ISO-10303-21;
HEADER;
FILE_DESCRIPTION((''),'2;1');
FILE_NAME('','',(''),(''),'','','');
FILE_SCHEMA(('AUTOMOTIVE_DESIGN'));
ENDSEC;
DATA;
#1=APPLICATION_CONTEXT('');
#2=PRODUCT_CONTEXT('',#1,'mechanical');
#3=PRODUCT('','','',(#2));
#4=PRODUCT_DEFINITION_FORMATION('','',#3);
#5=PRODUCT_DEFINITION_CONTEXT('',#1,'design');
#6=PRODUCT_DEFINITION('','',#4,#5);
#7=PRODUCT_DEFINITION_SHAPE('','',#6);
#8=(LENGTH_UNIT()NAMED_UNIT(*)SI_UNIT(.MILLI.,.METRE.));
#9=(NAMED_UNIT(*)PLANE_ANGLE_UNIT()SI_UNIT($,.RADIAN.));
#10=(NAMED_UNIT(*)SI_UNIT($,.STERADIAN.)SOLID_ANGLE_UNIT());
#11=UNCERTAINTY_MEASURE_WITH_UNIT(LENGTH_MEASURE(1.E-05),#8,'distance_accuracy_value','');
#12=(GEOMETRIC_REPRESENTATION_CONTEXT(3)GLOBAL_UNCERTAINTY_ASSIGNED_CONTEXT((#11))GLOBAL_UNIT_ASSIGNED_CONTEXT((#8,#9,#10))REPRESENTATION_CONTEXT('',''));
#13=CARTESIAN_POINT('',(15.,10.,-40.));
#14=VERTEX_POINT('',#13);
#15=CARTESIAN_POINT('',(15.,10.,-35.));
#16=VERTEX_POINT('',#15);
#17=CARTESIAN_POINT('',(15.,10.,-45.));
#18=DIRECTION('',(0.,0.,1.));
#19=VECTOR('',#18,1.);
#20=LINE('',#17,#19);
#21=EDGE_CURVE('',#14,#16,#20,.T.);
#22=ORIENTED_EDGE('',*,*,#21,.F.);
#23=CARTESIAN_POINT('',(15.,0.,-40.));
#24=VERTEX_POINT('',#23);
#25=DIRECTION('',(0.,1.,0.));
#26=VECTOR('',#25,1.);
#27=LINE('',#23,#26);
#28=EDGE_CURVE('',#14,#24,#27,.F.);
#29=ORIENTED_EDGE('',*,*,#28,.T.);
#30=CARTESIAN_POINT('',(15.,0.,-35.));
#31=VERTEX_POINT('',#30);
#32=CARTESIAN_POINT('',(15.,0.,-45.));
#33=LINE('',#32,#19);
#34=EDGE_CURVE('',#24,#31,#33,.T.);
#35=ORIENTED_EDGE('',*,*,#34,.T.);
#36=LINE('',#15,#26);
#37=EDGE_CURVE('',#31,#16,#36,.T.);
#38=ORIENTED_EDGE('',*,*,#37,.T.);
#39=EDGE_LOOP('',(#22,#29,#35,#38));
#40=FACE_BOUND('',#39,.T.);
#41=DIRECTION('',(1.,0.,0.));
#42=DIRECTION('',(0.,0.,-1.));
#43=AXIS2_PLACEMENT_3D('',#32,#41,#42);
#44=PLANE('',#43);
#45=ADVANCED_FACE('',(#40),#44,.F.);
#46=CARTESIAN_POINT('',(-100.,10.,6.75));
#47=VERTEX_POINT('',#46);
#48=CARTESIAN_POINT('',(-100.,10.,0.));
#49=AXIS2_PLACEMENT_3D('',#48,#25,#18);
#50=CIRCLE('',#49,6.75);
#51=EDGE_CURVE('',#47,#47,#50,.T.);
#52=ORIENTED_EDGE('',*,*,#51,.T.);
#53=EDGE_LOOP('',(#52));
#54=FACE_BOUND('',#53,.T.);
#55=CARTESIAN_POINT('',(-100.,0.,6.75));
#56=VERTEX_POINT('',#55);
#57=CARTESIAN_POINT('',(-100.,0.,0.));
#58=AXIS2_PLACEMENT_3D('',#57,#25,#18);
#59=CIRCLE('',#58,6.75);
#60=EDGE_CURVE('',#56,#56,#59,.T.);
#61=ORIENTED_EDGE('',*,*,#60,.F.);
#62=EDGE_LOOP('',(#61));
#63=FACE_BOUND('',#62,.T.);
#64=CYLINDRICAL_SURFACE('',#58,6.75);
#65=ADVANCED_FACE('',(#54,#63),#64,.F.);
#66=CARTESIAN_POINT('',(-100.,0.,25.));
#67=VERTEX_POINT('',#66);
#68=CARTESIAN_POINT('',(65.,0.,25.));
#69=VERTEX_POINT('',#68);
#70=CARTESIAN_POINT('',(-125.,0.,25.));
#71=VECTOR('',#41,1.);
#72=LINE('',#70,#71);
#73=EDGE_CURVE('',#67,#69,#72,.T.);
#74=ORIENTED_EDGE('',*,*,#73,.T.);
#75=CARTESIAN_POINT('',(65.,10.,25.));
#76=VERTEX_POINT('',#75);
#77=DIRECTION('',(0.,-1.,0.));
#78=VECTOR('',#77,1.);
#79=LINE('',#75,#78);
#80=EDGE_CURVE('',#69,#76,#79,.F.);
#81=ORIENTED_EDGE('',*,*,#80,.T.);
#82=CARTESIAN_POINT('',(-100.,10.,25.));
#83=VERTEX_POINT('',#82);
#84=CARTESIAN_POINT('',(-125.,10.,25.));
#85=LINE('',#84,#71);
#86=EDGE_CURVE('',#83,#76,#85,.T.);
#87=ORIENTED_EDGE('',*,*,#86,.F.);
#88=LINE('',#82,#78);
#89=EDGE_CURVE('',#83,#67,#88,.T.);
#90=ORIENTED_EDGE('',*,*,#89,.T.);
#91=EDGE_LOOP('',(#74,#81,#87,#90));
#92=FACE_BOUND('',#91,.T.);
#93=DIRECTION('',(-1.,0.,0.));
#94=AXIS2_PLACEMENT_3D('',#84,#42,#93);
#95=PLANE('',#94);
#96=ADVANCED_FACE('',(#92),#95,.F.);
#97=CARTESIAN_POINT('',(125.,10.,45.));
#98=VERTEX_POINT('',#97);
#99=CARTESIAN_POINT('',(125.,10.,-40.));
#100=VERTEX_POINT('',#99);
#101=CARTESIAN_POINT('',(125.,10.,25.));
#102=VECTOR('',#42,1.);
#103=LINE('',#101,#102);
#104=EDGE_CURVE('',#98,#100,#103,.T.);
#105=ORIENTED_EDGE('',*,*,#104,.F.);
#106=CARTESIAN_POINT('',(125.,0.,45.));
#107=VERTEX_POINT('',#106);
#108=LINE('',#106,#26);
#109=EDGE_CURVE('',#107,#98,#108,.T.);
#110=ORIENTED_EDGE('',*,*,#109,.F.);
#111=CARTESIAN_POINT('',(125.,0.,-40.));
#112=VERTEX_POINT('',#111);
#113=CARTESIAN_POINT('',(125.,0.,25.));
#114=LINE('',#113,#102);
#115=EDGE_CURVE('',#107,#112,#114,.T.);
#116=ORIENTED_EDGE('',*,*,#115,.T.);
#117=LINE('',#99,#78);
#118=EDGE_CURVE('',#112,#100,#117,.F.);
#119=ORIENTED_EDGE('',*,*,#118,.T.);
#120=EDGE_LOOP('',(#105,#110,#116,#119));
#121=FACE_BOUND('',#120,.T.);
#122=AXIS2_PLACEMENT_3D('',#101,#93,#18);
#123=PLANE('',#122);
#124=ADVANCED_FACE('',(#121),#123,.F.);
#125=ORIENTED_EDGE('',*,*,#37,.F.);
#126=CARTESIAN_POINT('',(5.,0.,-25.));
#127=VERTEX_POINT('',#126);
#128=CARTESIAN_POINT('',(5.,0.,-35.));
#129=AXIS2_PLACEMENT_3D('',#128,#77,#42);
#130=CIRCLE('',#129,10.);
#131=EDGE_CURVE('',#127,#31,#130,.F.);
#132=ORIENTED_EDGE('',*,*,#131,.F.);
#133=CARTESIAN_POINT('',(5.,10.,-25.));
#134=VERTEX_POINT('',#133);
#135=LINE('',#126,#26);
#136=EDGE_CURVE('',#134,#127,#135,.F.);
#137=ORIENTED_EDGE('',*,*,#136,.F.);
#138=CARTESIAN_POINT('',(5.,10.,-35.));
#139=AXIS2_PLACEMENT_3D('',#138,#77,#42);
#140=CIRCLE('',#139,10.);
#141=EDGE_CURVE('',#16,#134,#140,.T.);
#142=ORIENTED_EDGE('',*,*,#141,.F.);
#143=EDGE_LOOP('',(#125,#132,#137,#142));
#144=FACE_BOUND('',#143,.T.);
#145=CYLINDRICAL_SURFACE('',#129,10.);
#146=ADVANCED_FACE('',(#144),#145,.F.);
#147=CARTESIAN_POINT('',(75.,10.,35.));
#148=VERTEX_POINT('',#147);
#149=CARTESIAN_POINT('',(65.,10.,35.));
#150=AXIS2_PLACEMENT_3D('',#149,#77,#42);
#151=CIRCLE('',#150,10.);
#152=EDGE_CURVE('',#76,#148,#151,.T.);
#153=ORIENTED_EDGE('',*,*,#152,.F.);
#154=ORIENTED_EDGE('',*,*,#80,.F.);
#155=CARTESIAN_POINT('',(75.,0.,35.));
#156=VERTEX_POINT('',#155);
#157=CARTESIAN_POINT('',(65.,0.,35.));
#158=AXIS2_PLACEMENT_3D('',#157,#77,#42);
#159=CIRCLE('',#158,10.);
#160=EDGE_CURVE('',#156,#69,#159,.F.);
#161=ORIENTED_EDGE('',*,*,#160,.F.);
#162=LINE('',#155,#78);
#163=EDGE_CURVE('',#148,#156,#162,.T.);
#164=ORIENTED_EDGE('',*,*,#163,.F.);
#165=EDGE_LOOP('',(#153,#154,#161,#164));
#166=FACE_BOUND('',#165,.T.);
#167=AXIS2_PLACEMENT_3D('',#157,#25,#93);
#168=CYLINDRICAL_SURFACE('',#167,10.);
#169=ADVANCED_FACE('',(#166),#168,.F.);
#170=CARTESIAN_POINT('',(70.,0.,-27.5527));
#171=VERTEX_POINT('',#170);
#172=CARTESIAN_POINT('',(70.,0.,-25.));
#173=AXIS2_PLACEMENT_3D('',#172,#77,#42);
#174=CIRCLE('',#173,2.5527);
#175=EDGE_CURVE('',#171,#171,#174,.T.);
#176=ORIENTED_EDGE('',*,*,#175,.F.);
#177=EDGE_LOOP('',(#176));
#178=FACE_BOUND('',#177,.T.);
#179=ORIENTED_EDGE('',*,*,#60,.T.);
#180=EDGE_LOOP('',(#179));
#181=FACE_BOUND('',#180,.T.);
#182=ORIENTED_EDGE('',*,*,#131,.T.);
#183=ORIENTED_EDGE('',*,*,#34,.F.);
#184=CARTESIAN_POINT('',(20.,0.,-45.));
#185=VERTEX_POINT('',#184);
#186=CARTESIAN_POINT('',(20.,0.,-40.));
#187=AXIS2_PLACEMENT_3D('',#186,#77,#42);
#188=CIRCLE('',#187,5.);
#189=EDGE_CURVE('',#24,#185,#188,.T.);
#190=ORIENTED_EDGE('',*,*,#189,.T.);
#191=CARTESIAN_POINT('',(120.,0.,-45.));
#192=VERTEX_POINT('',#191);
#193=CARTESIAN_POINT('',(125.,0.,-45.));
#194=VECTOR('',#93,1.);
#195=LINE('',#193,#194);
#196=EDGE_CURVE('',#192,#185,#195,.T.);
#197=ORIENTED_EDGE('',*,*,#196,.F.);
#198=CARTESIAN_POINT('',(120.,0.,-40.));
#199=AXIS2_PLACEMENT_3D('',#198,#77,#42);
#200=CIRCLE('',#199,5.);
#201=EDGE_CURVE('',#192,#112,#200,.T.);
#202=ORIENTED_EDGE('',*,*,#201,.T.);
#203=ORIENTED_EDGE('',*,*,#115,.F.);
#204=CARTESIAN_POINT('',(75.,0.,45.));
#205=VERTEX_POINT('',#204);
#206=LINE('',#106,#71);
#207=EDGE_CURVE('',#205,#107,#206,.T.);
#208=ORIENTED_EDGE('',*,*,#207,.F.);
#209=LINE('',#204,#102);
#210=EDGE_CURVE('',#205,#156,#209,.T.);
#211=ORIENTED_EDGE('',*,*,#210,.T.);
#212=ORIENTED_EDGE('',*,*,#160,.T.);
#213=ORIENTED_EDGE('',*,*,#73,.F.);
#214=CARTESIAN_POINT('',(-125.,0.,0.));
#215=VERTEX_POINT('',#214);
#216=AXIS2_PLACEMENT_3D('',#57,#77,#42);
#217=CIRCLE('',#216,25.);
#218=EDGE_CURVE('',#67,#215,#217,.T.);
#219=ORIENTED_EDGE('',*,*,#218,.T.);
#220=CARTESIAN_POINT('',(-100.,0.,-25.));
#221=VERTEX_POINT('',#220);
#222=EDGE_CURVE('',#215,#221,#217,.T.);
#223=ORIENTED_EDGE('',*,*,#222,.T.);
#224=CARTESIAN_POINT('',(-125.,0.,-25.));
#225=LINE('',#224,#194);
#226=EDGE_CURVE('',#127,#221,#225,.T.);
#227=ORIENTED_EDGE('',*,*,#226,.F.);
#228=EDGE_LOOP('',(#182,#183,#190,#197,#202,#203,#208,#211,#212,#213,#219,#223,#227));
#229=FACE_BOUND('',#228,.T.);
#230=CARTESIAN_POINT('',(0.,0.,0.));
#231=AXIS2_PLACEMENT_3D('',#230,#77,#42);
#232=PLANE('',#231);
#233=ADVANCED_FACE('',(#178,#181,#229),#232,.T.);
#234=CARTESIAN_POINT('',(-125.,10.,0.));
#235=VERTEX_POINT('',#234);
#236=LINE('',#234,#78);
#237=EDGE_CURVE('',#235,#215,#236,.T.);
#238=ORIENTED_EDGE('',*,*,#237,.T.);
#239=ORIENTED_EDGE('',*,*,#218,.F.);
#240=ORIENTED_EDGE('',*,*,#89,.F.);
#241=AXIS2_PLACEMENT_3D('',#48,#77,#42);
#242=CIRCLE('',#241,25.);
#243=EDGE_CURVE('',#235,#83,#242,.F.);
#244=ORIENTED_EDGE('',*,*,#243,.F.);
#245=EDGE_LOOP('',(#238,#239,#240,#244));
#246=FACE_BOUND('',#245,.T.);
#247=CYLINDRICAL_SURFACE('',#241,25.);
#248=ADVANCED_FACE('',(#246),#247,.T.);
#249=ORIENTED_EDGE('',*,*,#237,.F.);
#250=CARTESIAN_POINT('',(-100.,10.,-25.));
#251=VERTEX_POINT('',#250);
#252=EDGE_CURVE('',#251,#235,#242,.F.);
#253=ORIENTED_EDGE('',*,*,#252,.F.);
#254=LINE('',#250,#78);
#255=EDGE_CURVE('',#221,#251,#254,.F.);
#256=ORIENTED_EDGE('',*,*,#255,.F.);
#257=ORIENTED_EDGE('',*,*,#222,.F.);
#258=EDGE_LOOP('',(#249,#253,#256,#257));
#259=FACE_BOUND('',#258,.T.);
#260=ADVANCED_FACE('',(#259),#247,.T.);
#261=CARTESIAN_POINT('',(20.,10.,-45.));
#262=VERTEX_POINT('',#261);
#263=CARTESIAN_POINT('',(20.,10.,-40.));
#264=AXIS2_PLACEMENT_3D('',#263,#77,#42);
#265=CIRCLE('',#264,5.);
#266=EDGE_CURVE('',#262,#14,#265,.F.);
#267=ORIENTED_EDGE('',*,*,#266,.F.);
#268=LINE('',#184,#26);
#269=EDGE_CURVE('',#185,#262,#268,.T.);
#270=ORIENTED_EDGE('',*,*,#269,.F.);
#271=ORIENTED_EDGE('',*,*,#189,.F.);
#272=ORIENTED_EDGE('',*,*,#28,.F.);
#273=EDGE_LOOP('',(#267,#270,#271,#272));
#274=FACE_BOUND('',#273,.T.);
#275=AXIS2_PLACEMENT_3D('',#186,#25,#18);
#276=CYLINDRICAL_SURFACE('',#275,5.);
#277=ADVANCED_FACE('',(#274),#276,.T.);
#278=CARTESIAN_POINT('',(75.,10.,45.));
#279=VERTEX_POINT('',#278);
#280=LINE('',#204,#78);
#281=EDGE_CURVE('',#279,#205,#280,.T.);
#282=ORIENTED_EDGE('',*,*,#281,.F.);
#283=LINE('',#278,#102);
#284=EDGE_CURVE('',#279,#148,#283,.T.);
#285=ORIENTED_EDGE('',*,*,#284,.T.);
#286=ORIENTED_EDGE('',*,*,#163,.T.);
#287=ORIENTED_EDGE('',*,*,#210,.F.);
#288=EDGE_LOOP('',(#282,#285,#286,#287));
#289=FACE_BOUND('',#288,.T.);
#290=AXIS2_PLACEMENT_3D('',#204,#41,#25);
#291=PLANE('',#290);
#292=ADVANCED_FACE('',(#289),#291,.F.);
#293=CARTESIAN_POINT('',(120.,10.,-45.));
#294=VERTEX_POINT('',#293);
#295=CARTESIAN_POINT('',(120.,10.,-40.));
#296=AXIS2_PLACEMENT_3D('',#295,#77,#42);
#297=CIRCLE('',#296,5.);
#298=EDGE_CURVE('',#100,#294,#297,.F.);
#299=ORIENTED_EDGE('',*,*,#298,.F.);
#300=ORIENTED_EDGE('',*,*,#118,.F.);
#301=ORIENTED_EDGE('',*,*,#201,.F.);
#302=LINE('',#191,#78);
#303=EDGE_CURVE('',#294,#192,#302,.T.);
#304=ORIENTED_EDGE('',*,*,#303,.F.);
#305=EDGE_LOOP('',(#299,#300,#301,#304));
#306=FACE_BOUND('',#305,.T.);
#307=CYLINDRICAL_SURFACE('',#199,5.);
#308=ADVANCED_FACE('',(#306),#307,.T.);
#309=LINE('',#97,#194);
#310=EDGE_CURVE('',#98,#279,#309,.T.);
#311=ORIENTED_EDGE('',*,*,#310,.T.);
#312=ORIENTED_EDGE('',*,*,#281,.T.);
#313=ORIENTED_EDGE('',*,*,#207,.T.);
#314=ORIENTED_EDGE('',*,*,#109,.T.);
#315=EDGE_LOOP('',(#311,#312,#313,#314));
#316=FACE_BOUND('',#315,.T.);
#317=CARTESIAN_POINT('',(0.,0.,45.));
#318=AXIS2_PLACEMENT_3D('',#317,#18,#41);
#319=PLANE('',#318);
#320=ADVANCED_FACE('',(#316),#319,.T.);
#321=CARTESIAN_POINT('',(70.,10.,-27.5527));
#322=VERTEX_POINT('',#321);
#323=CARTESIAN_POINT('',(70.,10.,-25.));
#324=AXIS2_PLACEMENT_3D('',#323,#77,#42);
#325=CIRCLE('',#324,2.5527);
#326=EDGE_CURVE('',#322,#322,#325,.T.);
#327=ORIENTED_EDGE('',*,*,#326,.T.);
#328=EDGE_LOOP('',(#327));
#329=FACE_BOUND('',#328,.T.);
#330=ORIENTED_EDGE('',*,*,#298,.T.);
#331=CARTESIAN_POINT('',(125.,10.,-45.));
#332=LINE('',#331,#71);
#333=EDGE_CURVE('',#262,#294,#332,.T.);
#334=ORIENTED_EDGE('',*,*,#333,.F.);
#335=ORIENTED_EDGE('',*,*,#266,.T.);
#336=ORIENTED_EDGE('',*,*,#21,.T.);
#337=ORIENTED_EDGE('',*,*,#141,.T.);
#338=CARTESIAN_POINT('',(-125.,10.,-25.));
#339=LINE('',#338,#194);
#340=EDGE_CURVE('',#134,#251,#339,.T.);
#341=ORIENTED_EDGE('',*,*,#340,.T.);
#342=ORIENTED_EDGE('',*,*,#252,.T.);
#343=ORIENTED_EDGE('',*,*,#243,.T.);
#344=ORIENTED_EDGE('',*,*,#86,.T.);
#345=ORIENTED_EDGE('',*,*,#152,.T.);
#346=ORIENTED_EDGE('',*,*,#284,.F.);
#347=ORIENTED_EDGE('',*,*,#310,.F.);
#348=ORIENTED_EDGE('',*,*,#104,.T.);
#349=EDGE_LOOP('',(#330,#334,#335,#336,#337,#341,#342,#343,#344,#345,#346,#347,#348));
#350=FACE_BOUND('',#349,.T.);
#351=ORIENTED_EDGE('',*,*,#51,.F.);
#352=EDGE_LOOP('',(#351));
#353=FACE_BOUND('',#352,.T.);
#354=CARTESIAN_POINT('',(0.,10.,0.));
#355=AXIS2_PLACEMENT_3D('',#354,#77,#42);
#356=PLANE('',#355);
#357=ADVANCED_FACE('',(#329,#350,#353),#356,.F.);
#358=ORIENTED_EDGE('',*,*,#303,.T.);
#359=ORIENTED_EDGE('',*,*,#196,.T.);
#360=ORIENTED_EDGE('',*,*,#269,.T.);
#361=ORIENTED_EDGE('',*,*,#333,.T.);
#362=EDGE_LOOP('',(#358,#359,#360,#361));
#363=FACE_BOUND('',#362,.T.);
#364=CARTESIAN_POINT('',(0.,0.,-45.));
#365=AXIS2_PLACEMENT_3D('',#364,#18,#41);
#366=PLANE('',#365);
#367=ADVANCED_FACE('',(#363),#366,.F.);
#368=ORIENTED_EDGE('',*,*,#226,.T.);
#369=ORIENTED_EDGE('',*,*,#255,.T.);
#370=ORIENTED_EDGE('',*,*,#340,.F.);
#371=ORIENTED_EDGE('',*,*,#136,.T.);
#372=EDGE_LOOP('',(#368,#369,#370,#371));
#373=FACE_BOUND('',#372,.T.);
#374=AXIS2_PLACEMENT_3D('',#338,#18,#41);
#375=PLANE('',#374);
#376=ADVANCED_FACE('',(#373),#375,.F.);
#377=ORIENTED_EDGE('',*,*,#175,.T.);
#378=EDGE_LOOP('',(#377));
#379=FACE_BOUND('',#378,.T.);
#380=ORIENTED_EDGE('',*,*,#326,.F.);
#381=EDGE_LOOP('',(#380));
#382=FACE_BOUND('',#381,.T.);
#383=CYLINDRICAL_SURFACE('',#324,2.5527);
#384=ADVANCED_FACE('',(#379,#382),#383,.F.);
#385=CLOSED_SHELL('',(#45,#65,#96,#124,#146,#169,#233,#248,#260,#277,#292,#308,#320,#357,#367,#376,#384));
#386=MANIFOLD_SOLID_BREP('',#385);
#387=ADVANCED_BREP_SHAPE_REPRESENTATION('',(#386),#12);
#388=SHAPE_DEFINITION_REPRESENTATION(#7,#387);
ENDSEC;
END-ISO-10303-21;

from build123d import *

# Parameters (mm, degrees)
SKETCH1_W           = 250
SKETCH1_H           = 50
BOSS_EXTRUDE1_DEPTH = 10
FILLET2_R           = 25
SKETCH4_R           = 6.75
CUT_EXTRUDE3_DEPTH  = 128.867118525
SKETCH5_W           = 110
SKETCH5_H           = 10
BOSS_EXTRUDE2_DEPTH = 20
SKETCH6_W           = 50
SKETCH6_H           = 10
BOSS_EXTRUDE3_DEPTH = 20
FILLET3_R           = 10
FILLET4_R           = 5
SKETCH7_R           = 2.5527
CUT_EXTRUDE4_DEPTH  = 134.229125945


with BuildPart() as part:
    # Sketch1 → Boss-Extrude1 (new body)
    with BuildSketch(Plane(origin=(0, 0, 0), x_dir=(1, 0, 0), z_dir=(0, 1, 0))):
        Rectangle(SKETCH1_W, SKETCH1_H)
    extrude(amount=BOSS_EXTRUDE1_DEPTH)

    # Fillet2
    fillet2_edges = [part.edges().sort_by_distance(p)[0] for p in [
        (-125, 5, 25),
        (-125, 5, -25),
    ]]
    fillet(fillet2_edges, radius=FILLET2_R - 0.0001)  # a hair under: the kernel refuses the full size

    # Sketch4 → Cut-Extrude3 (cut, through all)
    with BuildSketch(Plane(origin=(0, 10, 0), x_dir=(1, 0, 0), z_dir=(0, 1, 0))):
        with Locations(Location((-100, 0, 0), (0, 0, 270))):
            Circle(SKETCH4_R)
    extrude(amount=-CUT_EXTRUDE3_DEPTH, mode=Mode.SUBTRACT)

    # Sketch5 → Boss-Extrude2 (add)
    with BuildSketch(Plane(origin=(0, 0, -25), x_dir=(-1, 0, 0), z_dir=(0, 0, -1))):
        with Locations((-70, 5)):
            Rectangle(SKETCH5_W, SKETCH5_H)
    extrude(amount=BOSS_EXTRUDE2_DEPTH)

    # Sketch6 → Boss-Extrude3 (add)
    with BuildSketch(Plane.XY.offset(25)):
        with Locations((100, 5)):
            Rectangle(SKETCH6_W, SKETCH6_H)
    extrude(amount=BOSS_EXTRUDE3_DEPTH)

    # Fillet3
    fillet3_edges = [part.edges().sort_by_distance(p)[0] for p in [
        (15, 5, -25),
        (75, 5, 25),
    ]]
    fillet(fillet3_edges, radius=FILLET3_R)

    # Fillet4
    fillet4_edges = [part.edges().sort_by_distance(p)[0] for p in [
        (125, 5, -45),
        (15, 5, -45),
    ]]
    fillet(fillet4_edges, radius=FILLET4_R)

    # Sketch7 → Cut-Extrude4 (cut, through all)
    with BuildSketch(Plane.XZ):
        with Locations(Location((70, -25, 0), (0, 0, 270))):
            Circle(SKETCH7_R)
    extrude(amount=-CUT_EXTRUDE4_DEPTH, mode=Mode.SUBTRACT)


solid = part.part
